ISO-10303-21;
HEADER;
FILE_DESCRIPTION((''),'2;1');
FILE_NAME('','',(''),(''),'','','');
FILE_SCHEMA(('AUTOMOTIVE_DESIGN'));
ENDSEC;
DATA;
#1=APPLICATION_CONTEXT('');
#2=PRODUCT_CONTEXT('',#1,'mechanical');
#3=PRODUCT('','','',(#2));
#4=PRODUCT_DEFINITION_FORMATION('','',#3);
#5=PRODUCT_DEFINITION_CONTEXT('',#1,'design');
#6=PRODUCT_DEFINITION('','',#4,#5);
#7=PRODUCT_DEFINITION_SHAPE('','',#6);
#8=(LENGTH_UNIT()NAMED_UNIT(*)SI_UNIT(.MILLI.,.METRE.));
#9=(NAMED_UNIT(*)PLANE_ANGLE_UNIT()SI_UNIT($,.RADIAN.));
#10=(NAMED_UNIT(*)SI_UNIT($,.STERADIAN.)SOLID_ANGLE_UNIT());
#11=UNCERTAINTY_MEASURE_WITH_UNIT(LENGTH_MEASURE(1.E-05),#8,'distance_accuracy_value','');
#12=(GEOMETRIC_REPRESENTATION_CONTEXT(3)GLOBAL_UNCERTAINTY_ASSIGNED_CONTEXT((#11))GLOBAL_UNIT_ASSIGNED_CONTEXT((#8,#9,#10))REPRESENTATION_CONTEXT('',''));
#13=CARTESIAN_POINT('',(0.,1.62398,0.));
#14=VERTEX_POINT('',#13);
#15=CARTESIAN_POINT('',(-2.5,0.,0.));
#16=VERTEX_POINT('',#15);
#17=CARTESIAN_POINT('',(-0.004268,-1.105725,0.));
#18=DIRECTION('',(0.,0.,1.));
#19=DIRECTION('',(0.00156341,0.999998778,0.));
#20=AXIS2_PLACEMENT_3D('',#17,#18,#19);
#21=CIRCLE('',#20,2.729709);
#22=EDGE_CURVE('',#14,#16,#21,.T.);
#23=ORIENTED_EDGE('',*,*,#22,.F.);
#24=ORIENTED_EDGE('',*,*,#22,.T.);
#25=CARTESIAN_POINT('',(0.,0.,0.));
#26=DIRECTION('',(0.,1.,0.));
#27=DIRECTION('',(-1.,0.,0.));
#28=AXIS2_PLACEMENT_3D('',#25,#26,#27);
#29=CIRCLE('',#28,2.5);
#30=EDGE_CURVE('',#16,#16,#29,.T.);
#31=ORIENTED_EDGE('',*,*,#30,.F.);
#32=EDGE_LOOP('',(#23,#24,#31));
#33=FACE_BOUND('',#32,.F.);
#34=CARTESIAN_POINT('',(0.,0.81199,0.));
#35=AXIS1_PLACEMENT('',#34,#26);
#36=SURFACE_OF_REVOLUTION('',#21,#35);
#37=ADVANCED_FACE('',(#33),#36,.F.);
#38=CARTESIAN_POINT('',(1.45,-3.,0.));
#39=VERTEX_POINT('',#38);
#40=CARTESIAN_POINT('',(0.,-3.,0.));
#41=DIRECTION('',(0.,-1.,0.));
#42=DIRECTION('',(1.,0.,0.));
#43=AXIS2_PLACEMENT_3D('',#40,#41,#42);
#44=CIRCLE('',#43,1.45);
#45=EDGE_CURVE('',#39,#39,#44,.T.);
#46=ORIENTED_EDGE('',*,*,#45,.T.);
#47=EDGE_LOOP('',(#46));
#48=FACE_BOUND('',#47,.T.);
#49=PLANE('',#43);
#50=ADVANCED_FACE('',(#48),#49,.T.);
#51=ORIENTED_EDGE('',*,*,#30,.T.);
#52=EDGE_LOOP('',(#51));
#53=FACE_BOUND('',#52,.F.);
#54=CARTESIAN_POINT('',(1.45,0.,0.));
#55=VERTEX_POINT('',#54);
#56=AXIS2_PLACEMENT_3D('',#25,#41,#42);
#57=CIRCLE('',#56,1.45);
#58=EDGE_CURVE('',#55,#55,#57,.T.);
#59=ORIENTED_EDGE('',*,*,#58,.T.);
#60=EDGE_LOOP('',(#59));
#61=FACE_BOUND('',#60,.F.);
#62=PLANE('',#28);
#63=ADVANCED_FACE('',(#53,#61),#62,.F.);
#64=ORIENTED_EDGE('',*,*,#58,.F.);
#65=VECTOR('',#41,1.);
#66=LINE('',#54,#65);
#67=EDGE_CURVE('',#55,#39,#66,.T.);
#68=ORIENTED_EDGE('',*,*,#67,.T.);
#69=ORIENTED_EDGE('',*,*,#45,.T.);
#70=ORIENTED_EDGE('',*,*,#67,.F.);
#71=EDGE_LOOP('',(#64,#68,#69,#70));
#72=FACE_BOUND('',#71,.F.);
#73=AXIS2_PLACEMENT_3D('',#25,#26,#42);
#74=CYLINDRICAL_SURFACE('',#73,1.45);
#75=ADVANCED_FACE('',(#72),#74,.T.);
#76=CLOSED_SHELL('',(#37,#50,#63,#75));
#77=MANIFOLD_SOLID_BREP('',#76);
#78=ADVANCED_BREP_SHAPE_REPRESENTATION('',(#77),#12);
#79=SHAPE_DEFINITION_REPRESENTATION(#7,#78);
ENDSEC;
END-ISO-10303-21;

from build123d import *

# Parameters (mm, degrees)
F2_R     = 1.45
F3_DEPTH = 3


# Not quite as in the source:
# - a feature names something its author has since deleted; it is built from what else it names


with BuildPart() as f1:
    # F0 (on Top) → F1 (revolve)
    with BuildSketch(Plane.XY):
        with BuildLine():
            Line((-2.5, 0), (0, 0))
            Line((0, 0), (0, 1.6239797505))
            ThreePointArc((0, 1.6239797505), (-1.4912702214, 1.1834080247), (-2.5, 0))
        make_face()
    revolve(axis=Axis((0, 0.8119898753, 0), (0, 1, 0)))

    # F2 (on face) → F3 (join)
    with BuildSketch(Plane.XZ):
        Circle(F2_R)
    extrude(amount=F3_DEPTH)


solid = f1.part
